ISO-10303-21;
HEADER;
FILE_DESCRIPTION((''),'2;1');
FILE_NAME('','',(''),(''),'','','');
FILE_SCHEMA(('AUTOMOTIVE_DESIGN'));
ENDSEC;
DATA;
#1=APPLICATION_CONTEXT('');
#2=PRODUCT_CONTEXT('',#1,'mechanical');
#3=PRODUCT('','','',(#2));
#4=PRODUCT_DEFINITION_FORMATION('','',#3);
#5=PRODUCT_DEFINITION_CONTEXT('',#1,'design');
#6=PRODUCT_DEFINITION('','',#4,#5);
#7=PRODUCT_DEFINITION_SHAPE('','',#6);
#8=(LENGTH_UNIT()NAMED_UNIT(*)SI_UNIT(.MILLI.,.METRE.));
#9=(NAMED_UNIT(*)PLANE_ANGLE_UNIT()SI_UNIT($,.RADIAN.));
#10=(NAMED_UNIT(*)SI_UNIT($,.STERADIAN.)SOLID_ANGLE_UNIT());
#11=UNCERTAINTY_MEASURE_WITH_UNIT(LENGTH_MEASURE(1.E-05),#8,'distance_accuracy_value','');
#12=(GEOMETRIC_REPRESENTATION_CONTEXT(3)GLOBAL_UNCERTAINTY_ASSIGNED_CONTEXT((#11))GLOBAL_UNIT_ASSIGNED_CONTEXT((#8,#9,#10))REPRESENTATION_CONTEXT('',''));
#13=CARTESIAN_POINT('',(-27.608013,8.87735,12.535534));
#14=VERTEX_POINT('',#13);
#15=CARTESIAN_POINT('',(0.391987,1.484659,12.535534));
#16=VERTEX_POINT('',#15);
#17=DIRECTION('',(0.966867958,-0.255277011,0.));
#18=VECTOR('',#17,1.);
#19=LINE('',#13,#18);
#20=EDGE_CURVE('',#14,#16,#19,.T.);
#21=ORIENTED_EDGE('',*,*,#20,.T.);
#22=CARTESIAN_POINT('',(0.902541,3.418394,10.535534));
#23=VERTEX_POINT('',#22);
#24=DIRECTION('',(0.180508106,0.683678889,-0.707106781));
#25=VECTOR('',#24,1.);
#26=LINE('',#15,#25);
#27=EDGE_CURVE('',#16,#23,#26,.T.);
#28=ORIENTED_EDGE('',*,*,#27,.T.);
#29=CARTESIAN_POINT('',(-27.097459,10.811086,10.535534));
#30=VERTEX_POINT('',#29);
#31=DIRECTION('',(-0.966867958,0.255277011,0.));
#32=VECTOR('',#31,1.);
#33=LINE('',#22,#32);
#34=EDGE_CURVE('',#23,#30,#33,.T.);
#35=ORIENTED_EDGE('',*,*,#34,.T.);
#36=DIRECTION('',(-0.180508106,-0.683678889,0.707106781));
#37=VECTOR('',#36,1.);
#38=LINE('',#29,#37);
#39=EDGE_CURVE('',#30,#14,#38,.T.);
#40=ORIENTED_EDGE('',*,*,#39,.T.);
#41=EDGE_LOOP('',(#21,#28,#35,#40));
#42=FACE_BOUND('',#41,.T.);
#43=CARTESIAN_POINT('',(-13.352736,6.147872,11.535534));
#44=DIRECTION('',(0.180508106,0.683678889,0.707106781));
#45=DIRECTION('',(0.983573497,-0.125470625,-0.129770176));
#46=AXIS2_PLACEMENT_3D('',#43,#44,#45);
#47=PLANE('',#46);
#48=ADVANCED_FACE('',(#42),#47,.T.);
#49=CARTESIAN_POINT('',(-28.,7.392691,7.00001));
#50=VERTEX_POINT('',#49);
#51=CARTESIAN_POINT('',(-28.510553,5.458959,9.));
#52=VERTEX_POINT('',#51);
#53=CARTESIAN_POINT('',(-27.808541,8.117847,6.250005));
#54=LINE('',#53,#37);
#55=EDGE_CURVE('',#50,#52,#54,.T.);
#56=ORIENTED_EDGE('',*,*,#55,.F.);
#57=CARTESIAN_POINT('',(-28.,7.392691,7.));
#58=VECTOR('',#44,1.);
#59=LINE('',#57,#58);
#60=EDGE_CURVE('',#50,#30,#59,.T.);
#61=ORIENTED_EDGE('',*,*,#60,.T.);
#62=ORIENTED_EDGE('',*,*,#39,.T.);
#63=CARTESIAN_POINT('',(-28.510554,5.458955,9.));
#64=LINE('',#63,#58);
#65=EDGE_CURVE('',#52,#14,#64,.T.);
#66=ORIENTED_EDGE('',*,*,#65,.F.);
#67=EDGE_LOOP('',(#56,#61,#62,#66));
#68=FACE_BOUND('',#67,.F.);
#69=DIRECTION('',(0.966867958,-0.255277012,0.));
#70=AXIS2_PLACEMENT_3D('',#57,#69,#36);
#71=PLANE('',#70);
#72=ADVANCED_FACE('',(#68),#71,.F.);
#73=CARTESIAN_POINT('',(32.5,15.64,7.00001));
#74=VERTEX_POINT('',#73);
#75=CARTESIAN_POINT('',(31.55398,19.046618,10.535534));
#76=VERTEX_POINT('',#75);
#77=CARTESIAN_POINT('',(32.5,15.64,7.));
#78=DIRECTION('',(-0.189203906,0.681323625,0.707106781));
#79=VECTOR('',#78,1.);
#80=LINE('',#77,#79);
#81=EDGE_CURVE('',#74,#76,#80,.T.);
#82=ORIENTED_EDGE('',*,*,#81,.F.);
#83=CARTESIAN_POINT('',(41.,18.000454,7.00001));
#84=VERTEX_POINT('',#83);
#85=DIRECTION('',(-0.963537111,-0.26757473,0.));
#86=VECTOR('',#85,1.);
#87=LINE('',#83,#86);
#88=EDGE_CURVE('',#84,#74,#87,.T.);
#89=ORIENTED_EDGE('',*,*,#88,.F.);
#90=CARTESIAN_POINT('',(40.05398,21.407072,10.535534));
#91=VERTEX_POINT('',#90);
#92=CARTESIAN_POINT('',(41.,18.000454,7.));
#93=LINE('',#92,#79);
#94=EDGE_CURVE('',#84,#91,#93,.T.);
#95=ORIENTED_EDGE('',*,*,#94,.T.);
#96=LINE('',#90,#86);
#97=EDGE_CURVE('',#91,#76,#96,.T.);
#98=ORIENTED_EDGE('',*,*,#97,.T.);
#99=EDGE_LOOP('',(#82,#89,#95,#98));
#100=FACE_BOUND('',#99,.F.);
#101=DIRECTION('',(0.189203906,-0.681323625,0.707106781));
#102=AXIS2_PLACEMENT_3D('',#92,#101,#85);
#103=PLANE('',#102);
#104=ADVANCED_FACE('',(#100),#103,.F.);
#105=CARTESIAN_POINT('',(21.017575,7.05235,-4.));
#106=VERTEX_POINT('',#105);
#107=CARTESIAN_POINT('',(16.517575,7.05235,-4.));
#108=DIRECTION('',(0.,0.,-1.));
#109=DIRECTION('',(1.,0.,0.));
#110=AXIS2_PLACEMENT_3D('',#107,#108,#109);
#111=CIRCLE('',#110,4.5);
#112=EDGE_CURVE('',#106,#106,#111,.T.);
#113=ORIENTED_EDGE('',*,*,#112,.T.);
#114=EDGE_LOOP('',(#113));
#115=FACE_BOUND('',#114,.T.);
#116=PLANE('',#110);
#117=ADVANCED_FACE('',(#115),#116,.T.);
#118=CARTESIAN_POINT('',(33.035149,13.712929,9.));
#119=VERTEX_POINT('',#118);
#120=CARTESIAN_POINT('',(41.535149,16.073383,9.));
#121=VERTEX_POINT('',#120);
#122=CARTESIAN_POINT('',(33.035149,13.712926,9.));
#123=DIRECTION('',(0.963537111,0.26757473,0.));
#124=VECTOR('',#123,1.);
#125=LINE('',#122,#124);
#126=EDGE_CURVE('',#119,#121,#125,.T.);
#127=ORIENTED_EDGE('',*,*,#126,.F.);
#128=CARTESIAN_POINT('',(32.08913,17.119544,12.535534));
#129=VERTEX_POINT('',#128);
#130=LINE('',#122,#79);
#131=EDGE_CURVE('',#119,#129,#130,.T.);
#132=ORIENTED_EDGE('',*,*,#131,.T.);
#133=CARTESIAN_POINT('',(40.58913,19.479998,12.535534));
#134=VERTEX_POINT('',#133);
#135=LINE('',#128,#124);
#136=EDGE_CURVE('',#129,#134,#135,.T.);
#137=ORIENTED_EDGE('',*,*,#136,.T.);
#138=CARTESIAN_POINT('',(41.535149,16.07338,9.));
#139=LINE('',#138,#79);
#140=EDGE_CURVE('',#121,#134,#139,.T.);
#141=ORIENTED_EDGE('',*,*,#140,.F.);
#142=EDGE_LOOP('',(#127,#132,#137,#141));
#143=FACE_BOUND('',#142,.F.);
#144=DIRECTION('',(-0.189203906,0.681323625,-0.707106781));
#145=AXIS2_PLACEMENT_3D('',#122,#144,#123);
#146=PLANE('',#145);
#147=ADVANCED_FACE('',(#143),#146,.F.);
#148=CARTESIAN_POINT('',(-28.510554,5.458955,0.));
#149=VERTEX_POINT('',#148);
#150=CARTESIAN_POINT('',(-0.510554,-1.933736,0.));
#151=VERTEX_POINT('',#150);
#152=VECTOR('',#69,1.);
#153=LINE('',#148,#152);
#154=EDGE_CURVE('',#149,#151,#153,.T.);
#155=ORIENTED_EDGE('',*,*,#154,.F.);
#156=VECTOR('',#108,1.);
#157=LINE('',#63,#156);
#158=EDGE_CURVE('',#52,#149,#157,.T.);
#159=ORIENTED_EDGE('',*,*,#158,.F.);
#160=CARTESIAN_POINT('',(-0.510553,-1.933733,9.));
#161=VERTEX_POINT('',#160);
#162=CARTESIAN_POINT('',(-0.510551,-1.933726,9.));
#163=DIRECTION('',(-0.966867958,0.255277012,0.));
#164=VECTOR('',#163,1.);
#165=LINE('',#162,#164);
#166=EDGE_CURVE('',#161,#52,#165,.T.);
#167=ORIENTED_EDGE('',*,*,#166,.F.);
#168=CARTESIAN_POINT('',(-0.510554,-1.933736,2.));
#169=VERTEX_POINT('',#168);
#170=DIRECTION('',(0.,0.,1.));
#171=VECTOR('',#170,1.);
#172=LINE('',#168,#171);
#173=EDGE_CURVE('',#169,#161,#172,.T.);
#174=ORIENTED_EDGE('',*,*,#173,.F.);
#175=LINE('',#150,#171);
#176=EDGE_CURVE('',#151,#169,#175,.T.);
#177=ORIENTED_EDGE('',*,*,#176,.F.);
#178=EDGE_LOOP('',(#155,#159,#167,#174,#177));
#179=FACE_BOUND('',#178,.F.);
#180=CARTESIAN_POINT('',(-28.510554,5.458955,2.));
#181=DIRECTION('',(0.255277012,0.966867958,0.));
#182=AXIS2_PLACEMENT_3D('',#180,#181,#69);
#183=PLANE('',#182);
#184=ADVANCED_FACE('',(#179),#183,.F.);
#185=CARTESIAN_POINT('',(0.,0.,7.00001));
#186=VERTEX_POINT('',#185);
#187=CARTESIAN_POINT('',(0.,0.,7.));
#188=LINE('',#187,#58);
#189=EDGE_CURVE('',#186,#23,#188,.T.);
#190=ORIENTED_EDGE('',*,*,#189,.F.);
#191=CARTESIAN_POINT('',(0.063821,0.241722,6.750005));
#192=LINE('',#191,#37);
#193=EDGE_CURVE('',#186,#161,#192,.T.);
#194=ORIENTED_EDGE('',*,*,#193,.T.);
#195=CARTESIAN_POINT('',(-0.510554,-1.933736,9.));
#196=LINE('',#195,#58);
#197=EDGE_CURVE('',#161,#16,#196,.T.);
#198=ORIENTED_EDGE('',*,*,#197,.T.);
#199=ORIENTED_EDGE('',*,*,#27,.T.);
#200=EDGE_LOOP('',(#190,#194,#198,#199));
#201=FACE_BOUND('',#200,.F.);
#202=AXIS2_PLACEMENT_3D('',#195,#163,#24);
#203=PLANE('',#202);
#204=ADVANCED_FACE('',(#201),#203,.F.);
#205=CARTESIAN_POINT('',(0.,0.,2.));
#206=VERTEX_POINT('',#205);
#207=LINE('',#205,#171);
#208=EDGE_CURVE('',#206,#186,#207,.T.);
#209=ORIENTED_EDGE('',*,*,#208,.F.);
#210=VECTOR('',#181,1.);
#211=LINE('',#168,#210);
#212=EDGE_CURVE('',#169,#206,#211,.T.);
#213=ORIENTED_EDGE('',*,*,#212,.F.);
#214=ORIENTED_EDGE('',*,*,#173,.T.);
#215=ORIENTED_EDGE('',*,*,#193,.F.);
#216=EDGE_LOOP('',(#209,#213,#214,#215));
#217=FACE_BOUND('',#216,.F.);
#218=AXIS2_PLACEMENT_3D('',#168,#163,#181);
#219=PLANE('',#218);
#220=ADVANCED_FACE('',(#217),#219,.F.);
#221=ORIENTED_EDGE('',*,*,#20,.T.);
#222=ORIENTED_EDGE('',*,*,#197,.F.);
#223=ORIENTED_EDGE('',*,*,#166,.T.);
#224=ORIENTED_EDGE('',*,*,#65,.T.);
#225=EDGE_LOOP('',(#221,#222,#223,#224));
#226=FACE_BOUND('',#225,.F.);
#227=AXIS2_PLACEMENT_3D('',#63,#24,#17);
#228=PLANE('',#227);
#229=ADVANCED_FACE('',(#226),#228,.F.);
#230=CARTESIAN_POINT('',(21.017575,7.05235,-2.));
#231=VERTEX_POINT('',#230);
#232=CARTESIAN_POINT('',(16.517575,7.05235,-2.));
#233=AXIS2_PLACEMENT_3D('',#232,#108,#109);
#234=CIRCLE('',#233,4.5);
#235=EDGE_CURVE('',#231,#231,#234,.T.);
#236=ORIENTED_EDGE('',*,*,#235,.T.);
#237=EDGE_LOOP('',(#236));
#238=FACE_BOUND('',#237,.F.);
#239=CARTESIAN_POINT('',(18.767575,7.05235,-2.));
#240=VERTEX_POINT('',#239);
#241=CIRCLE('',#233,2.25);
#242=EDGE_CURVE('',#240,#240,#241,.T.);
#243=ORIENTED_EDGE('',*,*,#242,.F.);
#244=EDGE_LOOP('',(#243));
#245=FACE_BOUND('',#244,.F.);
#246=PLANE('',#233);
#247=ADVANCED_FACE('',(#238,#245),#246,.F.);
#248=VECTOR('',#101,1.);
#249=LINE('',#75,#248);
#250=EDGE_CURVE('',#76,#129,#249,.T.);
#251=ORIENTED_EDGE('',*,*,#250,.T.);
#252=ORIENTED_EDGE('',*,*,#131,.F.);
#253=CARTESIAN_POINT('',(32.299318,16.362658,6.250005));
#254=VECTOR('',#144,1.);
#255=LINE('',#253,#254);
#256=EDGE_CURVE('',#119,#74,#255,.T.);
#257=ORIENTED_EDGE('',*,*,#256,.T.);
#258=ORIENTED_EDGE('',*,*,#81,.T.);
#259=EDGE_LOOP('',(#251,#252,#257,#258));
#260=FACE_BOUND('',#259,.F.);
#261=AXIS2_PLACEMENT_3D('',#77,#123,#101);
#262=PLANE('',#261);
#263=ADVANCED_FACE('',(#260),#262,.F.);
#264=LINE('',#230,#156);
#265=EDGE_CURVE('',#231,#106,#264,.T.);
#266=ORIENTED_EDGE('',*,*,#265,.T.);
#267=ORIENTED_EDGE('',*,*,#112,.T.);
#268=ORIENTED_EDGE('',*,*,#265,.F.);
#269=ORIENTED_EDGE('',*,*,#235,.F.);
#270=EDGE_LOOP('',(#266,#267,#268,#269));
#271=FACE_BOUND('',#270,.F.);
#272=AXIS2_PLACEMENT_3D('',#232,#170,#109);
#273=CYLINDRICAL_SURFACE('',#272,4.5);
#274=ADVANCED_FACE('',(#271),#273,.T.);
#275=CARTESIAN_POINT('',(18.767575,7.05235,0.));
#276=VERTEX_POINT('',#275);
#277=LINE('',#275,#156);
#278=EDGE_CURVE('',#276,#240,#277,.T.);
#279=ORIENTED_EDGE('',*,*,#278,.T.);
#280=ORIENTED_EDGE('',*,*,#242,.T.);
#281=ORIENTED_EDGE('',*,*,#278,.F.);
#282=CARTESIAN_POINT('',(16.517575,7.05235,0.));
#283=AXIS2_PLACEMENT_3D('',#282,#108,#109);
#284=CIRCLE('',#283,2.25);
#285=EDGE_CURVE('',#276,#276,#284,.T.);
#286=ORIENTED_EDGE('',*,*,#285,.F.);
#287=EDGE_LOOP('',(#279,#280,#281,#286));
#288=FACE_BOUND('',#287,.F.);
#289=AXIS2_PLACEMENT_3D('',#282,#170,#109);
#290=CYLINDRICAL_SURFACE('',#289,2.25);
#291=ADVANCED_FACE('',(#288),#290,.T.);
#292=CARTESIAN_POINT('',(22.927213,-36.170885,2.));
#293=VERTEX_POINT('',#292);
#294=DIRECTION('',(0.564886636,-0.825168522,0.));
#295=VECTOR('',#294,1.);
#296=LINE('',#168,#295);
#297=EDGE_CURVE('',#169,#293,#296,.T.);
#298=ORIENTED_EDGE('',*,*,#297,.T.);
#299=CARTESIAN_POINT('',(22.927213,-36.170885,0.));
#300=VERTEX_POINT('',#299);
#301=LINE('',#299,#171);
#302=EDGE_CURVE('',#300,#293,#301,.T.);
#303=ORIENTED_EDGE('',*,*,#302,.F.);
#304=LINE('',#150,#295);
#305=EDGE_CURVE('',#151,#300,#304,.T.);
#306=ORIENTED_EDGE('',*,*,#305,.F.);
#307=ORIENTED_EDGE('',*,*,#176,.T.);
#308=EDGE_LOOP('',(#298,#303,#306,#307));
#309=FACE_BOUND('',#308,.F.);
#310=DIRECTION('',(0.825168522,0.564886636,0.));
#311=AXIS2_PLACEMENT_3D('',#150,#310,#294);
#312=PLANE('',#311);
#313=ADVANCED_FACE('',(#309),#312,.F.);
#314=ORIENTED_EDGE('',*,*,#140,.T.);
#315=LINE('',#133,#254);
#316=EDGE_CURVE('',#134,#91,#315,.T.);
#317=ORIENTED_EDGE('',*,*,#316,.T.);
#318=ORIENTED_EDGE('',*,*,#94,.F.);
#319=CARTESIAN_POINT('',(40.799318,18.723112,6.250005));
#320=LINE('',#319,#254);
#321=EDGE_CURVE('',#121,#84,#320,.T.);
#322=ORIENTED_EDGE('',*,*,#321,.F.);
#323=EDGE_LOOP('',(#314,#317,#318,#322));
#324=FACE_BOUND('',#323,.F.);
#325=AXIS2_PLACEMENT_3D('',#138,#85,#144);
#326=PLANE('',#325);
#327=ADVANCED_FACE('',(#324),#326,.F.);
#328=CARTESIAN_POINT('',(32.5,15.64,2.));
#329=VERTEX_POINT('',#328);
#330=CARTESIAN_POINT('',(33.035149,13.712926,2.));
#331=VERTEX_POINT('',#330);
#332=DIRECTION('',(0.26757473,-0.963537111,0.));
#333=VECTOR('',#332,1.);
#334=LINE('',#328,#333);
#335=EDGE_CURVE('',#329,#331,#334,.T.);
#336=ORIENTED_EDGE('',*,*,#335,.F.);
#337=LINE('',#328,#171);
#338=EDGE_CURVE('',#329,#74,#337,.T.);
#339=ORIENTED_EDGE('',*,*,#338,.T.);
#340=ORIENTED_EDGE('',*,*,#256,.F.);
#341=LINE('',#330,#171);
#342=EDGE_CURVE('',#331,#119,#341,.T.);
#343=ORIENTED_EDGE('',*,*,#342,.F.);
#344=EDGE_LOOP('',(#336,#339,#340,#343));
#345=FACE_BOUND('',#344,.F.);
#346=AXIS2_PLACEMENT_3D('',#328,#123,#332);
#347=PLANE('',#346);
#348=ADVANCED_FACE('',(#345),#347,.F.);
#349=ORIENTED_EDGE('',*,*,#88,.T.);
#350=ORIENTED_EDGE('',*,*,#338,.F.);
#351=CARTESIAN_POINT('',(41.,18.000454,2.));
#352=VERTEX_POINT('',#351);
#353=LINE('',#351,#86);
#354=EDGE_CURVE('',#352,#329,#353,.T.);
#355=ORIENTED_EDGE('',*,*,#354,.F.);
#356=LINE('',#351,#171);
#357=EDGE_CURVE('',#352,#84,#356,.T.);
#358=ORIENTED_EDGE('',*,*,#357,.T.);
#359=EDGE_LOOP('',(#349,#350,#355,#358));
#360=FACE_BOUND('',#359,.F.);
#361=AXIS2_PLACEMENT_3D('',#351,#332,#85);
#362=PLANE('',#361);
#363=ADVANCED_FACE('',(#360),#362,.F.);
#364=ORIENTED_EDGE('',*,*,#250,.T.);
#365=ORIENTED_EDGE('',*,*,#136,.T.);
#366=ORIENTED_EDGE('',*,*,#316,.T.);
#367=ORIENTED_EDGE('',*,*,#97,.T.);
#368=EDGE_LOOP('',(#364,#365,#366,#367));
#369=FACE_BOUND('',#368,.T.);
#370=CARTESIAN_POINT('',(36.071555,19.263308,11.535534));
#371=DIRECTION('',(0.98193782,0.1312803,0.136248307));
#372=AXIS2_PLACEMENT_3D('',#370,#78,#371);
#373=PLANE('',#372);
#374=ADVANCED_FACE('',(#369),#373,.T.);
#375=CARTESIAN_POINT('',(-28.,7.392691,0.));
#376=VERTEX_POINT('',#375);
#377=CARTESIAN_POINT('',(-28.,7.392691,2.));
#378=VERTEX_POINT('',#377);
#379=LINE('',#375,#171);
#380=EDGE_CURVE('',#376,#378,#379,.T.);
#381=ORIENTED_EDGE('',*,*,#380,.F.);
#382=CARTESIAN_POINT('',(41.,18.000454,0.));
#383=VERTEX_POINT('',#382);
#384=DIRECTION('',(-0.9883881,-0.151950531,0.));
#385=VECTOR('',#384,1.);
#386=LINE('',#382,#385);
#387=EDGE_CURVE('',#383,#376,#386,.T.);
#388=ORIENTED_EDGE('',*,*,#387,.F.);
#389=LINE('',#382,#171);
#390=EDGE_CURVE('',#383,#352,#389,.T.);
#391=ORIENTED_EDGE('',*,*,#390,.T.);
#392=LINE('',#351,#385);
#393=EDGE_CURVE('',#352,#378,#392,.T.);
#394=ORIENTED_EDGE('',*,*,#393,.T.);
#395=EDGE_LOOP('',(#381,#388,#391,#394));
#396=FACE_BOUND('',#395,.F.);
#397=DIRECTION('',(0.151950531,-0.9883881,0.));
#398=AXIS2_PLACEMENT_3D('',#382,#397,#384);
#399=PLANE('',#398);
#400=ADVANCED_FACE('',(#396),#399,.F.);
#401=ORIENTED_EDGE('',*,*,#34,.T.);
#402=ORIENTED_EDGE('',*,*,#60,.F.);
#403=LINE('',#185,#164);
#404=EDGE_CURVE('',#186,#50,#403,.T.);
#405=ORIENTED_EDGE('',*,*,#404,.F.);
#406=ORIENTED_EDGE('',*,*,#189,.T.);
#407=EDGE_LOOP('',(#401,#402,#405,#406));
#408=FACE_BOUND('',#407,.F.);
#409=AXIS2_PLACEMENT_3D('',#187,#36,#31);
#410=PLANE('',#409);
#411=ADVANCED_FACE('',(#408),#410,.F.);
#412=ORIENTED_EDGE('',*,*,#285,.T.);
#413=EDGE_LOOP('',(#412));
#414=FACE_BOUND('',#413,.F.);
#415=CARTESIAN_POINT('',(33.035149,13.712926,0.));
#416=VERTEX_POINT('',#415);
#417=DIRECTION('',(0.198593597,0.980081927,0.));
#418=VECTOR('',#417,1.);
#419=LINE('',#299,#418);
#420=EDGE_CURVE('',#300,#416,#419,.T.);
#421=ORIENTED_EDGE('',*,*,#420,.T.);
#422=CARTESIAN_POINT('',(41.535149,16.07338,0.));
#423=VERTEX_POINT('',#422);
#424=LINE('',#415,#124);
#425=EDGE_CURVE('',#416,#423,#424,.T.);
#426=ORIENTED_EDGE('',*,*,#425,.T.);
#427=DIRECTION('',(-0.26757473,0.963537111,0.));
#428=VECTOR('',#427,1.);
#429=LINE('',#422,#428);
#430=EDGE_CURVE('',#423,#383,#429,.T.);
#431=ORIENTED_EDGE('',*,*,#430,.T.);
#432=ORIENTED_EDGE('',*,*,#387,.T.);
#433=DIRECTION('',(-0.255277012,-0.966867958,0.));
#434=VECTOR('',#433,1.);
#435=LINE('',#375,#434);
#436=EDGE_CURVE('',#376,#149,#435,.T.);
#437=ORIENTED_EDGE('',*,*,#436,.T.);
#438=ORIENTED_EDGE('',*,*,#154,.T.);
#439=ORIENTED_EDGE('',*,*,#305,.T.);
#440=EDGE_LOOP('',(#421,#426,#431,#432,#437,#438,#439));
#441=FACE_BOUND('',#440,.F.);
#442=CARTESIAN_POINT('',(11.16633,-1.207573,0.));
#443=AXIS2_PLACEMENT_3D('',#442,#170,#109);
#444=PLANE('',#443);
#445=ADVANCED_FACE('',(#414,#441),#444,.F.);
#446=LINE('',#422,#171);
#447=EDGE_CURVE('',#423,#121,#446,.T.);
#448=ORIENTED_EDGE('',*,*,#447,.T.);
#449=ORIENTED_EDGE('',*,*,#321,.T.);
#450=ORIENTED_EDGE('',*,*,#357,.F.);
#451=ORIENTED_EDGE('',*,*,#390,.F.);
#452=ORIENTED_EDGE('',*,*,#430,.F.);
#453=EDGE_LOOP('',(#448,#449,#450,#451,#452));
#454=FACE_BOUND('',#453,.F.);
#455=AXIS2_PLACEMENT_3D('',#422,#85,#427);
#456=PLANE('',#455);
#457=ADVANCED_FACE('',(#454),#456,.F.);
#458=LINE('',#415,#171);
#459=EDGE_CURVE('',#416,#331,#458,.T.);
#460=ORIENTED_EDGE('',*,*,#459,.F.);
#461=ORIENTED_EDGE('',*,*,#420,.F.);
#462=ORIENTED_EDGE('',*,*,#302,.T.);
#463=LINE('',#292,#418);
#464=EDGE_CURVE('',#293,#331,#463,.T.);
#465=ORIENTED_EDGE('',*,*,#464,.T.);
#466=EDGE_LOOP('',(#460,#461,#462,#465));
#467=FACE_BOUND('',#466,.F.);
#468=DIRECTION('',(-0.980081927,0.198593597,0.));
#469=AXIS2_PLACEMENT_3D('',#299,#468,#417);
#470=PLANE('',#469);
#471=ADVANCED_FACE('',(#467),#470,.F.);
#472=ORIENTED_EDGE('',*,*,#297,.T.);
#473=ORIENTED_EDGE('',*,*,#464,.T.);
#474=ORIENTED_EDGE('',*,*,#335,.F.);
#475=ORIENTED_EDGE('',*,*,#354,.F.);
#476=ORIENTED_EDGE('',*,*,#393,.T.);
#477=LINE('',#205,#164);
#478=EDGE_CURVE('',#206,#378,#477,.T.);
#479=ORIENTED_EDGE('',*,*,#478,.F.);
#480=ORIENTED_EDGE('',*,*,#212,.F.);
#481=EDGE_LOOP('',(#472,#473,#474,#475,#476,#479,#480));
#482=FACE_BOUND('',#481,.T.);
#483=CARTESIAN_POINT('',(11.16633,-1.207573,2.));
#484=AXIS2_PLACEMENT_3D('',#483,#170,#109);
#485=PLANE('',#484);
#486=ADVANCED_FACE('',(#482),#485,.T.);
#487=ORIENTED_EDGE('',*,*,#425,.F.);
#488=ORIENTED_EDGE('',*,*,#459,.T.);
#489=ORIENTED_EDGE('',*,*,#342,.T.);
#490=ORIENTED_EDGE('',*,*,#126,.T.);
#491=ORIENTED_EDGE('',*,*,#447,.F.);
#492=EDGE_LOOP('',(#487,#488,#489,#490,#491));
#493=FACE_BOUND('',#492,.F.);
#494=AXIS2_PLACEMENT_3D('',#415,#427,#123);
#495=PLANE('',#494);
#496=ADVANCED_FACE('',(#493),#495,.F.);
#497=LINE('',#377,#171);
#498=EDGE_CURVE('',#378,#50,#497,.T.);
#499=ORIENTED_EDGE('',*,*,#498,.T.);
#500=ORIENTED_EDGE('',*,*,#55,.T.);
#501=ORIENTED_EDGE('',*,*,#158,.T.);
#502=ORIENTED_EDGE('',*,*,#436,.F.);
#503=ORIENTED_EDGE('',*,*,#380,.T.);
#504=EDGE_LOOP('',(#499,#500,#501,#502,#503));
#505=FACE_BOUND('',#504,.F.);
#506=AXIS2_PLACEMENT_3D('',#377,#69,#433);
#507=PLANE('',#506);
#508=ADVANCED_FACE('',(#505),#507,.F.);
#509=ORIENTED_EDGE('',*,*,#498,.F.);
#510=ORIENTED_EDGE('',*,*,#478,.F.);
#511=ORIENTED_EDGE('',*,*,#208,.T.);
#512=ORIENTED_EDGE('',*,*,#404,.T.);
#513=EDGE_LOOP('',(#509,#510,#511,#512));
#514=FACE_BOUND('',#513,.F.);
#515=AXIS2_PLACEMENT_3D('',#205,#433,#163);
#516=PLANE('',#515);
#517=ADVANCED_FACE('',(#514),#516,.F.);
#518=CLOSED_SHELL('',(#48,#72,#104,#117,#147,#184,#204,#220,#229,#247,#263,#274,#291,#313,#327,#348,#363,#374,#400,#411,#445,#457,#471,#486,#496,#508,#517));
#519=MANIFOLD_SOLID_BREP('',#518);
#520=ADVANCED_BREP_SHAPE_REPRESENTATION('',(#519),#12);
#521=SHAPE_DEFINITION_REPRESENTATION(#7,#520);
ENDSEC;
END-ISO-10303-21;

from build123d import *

# Parameters (mm, degrees)
F1_DEPTH  = 2
F3_DEPTH  = 7
F4_SIZE   = 1.99999
F6_DEPTH  = 5
F8_DEPTH  = 5
F9_R      = 2.25
F10_DEPTH = 2
F11_R     = 4.5
F12_DEPTH = 2


# Not quite as in the source:
# - a fillet or chamfer is up to 0.001 mm smaller than in the source, because OpenCascade refuses the exact size


with BuildPart() as f1:
    # F0 (on Top) → F1 (new body)
    with BuildSketch(Plane.XY):
        Polygon((-28.5105540231, 5.458955369), (-0.5105540231, -1.9337359151), (22.9272134602, -36.1708849669), (33.0351494605, 13.7129257786), (41.5351494605, 16.0733799656), (41, 18.000454187), (-28, 7.3926912842), align=None)
    extrude(amount=F1_DEPTH)

    # F2 (on face) → F3 (join)
    with BuildSketch(Plane.XY.offset(2)):
        Polygon((-28.5105540231, 5.458955369), (-0.5105540231, -1.9337359151), (0, 0), (-28, 7.3926912842), align=None)
        Polygon((32.5, 15.64), (33.0351494605, 13.7129257786), (41.5351494605, 16.0733799656), (41, 18.000454187), align=None)
    extrude(amount=F3_DEPTH)

    # F4 (size 2 in the source; OpenCascade refuses exactly that, so slightly less here)
    f4_edges = [f1.edges().sort_by_distance(p)[0] for p in [
        (-14, 3.696346, 9),
        (36.75, 16.820227, 9),
    ]]
    chamfer(f4_edges, length=F4_SIZE)

    # F5 (on face) → F6 (join)
    with BuildSketch(Plane(origin=(0.8934695404, 3.3840378515, 3.5), x_dir=(0.9835734968, -0.125470625, -0.129770176), z_dir=(0.1805081059, 0.6836788893, 0.7071067812))):
        Polygon((-1.4274719357, -7.6460659082), (-0.9083912318, -4.8656783052), (-29.3760147392, 0.4490461714), (-29.8950954431, -2.3313414316), align=None)
    extrude(amount=F6_DEPTH)

    # F7 (on face) → F8 (join)
    with BuildSketch(Plane(origin=(-1.7892109036, 6.442951854, 6.6867708388), x_dir=(0.9819378198, 0.1312802997, 0.1362483066), z_dir=(-0.1892039063, 0.6813236249, 0.7071067812))):
        Polygon((43.5762937763, 8.105378656), (34.9199411754, 6.4055834869), (35.4649344018, 3.6301587657), (44.1212870028, 5.3299539348), align=None)
    extrude(amount=F8_DEPTH)

    # F9 (on face) → F10 (join)
    with BuildSketch(Plane(origin=(0, 0, 0), x_dir=(1, 0, 0), z_dir=(0, 0, -1))):
        with Locations((16.5175747303, -7.0523503236)):
            Circle(F9_R)
    extrude(amount=F10_DEPTH)

    # F11 (on face) → F12 (join)
    with BuildSketch(Plane(origin=(0, 0, -2), x_dir=(1, 0, 0), z_dir=(0, 0, -1))):
        with Locations((16.5175747303, -7.0523503236)):
            Circle(F11_R)
    extrude(amount=F12_DEPTH)


solid = f1.part
